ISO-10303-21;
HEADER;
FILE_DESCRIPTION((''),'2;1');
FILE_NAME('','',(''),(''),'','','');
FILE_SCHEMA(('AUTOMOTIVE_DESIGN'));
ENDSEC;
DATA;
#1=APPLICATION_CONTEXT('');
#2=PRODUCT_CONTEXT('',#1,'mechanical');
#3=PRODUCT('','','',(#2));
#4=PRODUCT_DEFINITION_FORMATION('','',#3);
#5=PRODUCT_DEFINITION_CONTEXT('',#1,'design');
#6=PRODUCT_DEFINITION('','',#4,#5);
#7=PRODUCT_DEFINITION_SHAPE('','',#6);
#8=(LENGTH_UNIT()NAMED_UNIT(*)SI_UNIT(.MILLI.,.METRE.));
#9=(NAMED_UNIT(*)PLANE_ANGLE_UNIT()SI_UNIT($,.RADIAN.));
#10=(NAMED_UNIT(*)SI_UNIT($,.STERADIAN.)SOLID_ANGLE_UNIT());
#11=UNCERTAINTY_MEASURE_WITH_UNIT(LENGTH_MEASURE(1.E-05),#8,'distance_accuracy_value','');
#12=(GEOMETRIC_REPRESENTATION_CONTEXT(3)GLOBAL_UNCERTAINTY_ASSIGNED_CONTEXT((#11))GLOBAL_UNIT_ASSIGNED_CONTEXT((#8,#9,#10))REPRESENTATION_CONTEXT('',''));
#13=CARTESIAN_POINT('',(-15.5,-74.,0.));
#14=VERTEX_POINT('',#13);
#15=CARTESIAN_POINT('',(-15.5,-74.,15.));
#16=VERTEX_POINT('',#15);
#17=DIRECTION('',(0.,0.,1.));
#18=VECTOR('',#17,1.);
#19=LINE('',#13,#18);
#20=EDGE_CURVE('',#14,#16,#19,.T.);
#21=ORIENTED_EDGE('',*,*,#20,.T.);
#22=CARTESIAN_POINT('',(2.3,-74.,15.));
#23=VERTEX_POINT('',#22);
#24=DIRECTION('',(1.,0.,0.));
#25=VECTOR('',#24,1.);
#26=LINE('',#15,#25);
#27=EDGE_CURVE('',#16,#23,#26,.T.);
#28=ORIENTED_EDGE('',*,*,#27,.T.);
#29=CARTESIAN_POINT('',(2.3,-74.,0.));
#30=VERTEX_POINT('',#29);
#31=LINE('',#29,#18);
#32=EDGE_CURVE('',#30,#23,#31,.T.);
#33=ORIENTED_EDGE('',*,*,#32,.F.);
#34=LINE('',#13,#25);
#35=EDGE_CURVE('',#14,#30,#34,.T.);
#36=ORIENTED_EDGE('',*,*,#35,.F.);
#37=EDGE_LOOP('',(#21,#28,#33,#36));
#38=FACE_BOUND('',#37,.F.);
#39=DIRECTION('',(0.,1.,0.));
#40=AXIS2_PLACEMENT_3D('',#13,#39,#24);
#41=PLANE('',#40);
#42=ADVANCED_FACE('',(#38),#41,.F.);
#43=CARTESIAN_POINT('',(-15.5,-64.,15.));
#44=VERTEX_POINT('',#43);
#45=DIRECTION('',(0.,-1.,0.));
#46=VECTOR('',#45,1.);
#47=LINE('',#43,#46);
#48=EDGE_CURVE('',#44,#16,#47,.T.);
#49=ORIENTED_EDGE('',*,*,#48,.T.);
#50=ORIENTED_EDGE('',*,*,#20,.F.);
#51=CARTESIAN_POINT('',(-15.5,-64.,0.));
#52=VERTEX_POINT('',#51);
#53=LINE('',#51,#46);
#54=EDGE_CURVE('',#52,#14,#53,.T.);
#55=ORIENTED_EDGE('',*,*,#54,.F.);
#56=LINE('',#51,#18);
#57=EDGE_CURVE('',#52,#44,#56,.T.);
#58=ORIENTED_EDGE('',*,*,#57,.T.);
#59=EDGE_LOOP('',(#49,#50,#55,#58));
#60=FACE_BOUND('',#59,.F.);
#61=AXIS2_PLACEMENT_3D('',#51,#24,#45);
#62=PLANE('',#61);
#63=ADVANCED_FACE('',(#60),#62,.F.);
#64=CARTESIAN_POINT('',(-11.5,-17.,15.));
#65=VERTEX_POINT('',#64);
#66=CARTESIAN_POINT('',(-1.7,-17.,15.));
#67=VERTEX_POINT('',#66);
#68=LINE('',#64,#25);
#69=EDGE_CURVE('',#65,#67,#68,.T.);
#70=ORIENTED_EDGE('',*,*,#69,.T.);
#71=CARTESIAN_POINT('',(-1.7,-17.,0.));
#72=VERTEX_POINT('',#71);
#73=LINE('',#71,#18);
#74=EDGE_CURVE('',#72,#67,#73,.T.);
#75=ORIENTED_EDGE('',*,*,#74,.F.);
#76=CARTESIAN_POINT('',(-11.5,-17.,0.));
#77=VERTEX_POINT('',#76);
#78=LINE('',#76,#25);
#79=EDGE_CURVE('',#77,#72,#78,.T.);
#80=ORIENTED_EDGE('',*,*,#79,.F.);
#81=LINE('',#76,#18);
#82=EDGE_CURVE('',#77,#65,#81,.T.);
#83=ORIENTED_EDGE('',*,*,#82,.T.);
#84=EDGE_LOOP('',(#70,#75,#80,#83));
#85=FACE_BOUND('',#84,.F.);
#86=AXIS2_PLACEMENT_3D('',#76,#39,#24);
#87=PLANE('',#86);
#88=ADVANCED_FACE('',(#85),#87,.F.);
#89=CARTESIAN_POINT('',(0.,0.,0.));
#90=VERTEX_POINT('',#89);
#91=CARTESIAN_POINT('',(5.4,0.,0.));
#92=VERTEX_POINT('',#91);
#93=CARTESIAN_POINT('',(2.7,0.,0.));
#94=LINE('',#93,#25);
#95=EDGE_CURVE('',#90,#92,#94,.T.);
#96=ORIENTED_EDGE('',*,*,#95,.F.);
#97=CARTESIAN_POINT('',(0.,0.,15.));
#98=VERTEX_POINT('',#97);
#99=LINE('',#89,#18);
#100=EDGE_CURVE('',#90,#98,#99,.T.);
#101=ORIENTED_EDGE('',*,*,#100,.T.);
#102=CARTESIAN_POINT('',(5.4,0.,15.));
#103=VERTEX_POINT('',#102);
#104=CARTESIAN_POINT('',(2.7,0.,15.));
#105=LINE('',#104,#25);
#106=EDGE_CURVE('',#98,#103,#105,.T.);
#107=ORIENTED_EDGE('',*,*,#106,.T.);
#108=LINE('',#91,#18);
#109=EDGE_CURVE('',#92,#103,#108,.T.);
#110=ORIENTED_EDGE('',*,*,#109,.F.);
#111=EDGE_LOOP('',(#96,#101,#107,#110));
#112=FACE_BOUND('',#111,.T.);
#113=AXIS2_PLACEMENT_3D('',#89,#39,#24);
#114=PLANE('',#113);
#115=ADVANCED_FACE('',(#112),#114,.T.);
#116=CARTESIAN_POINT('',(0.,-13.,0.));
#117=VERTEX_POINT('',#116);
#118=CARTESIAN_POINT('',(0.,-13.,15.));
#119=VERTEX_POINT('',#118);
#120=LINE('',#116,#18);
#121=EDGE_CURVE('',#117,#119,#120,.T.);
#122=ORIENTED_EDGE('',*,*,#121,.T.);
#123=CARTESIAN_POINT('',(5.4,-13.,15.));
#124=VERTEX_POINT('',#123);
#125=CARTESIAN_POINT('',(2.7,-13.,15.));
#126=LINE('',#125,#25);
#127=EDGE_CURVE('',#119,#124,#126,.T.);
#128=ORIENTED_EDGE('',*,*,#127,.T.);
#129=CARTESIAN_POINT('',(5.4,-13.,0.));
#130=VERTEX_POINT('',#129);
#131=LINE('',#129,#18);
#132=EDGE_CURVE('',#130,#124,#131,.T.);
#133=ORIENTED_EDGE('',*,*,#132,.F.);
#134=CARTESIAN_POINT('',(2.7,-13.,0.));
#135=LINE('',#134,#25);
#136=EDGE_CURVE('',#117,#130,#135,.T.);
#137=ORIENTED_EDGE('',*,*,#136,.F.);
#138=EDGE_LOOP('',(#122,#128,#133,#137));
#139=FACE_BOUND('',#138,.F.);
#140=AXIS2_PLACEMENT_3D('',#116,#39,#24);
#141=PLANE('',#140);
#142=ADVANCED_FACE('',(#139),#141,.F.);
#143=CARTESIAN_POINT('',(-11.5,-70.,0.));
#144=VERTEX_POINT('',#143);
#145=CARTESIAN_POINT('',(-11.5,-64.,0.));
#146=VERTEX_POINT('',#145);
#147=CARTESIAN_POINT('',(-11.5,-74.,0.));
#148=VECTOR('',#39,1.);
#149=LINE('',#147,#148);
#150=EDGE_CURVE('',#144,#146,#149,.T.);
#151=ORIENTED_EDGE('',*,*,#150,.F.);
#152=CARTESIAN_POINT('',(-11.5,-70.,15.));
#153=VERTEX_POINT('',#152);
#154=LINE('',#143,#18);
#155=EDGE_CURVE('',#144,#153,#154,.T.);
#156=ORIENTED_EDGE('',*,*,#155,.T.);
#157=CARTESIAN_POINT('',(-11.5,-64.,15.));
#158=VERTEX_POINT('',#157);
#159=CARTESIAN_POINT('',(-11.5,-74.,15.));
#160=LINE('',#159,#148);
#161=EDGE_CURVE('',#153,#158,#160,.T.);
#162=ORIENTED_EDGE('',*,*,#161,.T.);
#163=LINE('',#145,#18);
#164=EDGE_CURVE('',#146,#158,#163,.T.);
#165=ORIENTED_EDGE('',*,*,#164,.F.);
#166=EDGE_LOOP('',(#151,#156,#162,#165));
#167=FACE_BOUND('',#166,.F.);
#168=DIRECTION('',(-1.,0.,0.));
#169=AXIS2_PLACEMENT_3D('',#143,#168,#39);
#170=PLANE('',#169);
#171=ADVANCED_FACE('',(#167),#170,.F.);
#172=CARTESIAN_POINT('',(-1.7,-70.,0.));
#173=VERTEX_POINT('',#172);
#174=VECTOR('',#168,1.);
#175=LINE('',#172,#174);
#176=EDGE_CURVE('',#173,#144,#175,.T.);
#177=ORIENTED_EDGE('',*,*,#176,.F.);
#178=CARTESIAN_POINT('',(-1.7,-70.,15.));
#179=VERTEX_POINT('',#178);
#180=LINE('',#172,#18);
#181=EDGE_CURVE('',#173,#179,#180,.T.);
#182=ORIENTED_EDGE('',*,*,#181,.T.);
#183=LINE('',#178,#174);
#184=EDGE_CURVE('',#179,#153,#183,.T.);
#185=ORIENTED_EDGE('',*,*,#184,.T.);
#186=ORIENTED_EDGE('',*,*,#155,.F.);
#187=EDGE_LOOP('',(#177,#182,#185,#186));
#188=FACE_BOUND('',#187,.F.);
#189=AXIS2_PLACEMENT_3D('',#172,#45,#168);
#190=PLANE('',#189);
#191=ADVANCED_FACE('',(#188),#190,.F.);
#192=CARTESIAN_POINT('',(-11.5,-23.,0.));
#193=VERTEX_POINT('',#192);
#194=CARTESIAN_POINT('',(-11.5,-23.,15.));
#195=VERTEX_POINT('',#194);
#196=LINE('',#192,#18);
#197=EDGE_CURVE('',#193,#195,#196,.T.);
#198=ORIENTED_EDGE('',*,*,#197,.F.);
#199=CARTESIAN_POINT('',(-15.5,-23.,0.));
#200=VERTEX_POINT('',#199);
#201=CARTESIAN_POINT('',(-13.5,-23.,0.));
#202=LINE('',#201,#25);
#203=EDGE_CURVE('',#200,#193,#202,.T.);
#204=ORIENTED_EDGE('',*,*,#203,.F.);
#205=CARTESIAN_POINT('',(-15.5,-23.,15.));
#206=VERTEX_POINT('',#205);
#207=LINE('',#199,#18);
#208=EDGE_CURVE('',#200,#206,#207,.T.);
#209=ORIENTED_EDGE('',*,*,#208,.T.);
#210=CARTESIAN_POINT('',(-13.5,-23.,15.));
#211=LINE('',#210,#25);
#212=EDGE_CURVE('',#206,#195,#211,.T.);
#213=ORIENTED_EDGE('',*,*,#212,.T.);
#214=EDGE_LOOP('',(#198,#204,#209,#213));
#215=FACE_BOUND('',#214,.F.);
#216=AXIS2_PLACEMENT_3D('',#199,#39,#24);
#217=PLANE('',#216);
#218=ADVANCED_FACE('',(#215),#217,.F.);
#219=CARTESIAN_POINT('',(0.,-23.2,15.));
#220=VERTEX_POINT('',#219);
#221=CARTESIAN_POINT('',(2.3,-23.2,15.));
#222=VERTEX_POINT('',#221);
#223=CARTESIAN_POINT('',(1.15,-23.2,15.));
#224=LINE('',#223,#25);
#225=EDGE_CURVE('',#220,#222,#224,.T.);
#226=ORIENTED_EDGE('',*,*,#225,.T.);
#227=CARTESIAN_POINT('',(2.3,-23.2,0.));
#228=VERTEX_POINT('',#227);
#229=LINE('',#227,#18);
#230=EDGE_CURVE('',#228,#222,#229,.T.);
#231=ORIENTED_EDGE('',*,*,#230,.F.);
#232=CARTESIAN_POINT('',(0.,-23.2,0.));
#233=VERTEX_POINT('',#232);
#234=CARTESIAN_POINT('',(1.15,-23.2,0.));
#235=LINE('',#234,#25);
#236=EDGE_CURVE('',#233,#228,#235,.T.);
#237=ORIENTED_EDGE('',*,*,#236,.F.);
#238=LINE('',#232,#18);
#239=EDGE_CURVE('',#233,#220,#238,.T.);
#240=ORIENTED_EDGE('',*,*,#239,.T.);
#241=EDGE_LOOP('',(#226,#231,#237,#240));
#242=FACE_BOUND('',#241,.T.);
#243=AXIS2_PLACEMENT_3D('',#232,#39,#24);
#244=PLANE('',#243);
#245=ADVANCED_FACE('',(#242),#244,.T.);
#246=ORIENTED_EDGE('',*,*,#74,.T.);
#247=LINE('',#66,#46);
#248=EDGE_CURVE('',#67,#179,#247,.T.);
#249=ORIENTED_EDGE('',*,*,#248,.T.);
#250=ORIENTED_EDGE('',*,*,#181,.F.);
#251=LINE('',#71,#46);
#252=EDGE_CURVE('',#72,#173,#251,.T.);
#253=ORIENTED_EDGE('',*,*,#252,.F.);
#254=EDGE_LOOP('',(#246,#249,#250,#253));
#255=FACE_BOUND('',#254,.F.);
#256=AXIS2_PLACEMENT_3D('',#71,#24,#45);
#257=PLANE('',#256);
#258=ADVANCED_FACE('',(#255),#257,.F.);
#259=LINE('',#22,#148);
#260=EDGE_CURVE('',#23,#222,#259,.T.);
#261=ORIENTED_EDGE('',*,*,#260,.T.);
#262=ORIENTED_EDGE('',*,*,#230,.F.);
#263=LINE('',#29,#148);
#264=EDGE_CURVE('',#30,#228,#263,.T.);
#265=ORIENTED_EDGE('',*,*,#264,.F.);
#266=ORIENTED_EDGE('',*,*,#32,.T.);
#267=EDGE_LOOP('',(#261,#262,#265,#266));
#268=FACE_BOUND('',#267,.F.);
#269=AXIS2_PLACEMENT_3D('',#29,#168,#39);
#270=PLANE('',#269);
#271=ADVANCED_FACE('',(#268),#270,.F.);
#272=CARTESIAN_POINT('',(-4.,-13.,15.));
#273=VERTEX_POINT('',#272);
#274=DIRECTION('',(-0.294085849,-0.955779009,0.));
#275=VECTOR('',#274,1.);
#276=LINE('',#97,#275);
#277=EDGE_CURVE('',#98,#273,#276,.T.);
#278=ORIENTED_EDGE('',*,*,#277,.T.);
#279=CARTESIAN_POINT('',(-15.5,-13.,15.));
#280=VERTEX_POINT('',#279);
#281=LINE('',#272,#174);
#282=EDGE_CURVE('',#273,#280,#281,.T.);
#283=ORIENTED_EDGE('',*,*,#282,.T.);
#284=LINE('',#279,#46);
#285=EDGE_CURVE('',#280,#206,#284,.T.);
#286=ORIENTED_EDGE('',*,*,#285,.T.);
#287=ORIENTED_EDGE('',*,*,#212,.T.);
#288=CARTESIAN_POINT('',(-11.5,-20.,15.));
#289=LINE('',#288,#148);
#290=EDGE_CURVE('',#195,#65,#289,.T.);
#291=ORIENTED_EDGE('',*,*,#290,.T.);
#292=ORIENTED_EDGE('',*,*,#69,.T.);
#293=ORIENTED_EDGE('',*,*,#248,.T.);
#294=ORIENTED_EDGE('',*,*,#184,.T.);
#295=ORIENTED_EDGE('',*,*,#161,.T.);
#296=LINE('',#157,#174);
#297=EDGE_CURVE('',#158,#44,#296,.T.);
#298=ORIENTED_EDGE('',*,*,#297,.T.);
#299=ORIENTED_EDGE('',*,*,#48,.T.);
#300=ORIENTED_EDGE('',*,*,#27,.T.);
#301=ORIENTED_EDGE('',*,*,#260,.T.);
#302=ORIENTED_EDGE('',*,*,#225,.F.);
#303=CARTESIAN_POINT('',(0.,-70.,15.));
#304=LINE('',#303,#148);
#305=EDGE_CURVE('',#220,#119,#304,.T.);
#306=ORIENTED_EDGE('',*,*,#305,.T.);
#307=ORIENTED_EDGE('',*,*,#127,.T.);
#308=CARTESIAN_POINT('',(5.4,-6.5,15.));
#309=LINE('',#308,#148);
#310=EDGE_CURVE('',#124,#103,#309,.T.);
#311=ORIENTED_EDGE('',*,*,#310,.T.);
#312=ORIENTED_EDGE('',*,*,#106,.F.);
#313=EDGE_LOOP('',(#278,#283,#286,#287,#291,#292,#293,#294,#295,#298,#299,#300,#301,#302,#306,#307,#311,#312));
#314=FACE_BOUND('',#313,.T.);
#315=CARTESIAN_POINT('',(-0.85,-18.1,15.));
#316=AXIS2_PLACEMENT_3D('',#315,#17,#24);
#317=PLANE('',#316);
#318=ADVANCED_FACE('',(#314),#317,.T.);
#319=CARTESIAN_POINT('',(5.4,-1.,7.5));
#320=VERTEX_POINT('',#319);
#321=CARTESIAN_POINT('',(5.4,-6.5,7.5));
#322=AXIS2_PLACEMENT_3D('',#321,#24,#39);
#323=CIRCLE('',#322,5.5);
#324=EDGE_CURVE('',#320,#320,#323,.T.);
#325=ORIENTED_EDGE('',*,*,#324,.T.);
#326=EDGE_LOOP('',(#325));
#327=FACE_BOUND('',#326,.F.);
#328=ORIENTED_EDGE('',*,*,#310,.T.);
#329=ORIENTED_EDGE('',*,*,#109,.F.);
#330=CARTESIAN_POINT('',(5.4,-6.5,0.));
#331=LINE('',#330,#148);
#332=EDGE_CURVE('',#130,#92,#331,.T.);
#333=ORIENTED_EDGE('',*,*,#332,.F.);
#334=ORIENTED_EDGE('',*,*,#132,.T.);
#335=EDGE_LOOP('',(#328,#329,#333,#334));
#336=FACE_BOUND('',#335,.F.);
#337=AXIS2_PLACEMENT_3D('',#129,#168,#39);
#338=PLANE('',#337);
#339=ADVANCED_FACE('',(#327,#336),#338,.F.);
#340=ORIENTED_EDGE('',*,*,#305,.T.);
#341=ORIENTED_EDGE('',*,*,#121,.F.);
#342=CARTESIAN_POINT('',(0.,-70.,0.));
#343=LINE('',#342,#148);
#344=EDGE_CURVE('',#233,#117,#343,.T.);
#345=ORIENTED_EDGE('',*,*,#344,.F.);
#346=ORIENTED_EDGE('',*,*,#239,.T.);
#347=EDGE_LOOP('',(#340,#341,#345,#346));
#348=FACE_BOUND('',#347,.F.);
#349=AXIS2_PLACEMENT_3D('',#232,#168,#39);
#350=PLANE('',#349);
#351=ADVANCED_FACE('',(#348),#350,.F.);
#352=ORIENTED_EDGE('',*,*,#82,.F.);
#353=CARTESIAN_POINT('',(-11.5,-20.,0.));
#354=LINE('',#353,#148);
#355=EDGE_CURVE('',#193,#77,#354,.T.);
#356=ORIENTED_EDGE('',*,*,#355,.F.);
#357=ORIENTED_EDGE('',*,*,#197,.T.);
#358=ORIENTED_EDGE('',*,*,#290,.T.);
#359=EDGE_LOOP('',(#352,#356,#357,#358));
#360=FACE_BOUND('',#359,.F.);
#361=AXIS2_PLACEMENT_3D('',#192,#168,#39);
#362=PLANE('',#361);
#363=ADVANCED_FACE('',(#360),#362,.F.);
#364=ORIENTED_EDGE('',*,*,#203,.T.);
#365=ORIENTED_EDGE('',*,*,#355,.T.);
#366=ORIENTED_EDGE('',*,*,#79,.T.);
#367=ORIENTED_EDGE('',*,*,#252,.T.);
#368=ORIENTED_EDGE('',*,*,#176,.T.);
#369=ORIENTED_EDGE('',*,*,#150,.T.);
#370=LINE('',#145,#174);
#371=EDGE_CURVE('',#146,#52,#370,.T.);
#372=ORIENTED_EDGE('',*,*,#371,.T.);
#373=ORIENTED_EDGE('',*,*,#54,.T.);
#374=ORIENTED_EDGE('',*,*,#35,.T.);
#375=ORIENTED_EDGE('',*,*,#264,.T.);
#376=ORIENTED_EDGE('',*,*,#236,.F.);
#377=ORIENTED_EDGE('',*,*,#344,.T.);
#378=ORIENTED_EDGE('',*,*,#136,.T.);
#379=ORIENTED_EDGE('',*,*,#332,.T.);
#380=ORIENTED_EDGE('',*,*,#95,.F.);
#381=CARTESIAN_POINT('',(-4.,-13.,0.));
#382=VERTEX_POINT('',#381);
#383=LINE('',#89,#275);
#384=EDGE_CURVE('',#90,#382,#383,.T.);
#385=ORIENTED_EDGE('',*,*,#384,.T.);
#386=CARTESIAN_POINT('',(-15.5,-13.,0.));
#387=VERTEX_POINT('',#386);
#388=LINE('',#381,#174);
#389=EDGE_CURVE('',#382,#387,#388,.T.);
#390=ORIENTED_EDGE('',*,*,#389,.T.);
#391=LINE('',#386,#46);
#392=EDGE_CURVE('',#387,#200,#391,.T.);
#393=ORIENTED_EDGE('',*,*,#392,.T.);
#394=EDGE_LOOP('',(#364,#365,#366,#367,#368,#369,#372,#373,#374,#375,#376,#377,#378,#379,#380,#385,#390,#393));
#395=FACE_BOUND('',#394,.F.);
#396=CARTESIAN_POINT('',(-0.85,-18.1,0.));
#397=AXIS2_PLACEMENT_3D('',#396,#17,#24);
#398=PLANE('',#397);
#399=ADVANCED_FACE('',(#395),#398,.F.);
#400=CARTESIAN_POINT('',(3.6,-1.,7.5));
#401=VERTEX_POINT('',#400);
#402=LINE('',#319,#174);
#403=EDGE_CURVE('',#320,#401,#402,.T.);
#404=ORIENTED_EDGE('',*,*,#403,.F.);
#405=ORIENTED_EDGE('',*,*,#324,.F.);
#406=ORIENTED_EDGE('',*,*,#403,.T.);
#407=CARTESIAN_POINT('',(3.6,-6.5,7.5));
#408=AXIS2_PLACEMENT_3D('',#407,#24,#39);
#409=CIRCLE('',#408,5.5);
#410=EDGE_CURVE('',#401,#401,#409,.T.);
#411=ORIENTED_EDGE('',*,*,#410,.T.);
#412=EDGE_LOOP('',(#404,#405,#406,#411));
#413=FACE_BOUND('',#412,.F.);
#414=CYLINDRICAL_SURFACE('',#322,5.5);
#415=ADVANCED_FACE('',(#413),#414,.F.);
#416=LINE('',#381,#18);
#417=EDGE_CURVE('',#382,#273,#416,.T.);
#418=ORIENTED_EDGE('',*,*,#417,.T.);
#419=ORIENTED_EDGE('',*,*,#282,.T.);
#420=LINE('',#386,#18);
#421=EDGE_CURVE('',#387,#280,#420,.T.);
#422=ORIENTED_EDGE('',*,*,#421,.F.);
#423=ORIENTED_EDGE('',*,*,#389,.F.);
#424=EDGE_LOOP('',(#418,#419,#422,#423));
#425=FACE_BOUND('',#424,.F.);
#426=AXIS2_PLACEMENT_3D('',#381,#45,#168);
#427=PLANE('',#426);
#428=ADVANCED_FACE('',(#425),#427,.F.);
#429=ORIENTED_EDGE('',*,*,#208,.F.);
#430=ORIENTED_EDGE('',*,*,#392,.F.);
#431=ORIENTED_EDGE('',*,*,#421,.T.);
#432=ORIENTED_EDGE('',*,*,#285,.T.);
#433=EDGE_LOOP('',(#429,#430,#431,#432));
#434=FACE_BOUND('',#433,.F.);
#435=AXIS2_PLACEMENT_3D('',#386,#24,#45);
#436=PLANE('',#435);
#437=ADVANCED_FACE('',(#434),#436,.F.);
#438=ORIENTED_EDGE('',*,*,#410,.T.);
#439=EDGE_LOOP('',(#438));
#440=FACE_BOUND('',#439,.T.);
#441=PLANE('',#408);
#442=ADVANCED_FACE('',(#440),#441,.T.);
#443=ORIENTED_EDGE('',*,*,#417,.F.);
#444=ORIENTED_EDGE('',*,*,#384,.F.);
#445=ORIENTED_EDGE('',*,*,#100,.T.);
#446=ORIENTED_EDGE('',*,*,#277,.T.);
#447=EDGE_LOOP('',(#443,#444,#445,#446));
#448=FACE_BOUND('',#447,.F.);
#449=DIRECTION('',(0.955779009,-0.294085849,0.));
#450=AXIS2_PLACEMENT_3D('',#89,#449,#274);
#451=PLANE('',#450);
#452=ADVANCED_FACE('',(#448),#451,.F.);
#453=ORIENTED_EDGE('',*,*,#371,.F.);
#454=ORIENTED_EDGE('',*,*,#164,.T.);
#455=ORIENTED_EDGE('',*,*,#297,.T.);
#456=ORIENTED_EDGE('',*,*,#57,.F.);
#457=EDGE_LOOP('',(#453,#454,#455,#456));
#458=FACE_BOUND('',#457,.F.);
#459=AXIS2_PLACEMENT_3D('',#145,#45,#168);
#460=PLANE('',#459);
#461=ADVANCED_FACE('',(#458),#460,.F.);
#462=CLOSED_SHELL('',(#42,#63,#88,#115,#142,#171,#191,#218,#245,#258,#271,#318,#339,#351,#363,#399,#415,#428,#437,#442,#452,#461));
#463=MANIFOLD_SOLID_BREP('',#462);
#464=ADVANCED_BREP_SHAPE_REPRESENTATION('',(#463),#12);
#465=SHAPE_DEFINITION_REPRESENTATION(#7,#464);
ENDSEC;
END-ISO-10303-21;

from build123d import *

# Parameters (mm, degrees)
F0_W     = 2.3
F0_H     = 4
F0_W_2   = 5.4
F0_H_2   = 13
F0_W_3   = 1.7
F0_H_3   = 46.8
F0_W_4   = 4
F0_H_4   = 6
F1_DEPTH = 15
F2_R     = 5.5
F3_DEPTH = 1.8


# Not quite as in the source:
# - a feature names something its author has since deleted; it is built from what else it names


with BuildPart() as f1:
    # F0 (on Top) → F1 (new body)
    with BuildSketch(Plane.XY):
        Polygon((0, -23.2), (0, -13), (-1.7, -13), (-1.7, -17), (-1.7, -23.2), align=None)
        with Locations((-2.85, -15)):
            Rectangle(F0_W, F0_H)
        with Locations((2.7, -6.5)):
            Rectangle(F0_W_2, F0_H_2)
        with Locations((-0.85, -46.6)):
            Rectangle(F0_W_3, F0_H_3)
        Polygon((-11.5, -74), (-11.5, -70), (-11.5, -64), (-15.5, -64), (-15.5, -74), align=None)
        with Locations((1.15, -46.6)):
            Rectangle(F0_W, F0_H_3)
        Polygon((2.3, -70), (0, -70), (-1.7, -70), (-11.5, -70), (-11.5, -74), (2.3, -74), align=None)
        Polygon((0, -13), (0, 0), (-4, -13), (-1.7, -13), align=None)
        Polygon((-4, -17), (-4, -13), (-15.5, -13), (-15.5, -17), (-11.5, -17), align=None)
        with Locations((-13.5, -20)):
            Rectangle(F0_W_4, F0_H_4)
    extrude(amount=F1_DEPTH)

    # F2 (on face) → F3 (cut)
    with BuildSketch(Plane.YZ.offset(5.4)):
        with Locations((-6.5, 7.5)):
            Circle(F2_R)
    extrude(amount=-F3_DEPTH, mode=Mode.SUBTRACT)


solid = f1.part
